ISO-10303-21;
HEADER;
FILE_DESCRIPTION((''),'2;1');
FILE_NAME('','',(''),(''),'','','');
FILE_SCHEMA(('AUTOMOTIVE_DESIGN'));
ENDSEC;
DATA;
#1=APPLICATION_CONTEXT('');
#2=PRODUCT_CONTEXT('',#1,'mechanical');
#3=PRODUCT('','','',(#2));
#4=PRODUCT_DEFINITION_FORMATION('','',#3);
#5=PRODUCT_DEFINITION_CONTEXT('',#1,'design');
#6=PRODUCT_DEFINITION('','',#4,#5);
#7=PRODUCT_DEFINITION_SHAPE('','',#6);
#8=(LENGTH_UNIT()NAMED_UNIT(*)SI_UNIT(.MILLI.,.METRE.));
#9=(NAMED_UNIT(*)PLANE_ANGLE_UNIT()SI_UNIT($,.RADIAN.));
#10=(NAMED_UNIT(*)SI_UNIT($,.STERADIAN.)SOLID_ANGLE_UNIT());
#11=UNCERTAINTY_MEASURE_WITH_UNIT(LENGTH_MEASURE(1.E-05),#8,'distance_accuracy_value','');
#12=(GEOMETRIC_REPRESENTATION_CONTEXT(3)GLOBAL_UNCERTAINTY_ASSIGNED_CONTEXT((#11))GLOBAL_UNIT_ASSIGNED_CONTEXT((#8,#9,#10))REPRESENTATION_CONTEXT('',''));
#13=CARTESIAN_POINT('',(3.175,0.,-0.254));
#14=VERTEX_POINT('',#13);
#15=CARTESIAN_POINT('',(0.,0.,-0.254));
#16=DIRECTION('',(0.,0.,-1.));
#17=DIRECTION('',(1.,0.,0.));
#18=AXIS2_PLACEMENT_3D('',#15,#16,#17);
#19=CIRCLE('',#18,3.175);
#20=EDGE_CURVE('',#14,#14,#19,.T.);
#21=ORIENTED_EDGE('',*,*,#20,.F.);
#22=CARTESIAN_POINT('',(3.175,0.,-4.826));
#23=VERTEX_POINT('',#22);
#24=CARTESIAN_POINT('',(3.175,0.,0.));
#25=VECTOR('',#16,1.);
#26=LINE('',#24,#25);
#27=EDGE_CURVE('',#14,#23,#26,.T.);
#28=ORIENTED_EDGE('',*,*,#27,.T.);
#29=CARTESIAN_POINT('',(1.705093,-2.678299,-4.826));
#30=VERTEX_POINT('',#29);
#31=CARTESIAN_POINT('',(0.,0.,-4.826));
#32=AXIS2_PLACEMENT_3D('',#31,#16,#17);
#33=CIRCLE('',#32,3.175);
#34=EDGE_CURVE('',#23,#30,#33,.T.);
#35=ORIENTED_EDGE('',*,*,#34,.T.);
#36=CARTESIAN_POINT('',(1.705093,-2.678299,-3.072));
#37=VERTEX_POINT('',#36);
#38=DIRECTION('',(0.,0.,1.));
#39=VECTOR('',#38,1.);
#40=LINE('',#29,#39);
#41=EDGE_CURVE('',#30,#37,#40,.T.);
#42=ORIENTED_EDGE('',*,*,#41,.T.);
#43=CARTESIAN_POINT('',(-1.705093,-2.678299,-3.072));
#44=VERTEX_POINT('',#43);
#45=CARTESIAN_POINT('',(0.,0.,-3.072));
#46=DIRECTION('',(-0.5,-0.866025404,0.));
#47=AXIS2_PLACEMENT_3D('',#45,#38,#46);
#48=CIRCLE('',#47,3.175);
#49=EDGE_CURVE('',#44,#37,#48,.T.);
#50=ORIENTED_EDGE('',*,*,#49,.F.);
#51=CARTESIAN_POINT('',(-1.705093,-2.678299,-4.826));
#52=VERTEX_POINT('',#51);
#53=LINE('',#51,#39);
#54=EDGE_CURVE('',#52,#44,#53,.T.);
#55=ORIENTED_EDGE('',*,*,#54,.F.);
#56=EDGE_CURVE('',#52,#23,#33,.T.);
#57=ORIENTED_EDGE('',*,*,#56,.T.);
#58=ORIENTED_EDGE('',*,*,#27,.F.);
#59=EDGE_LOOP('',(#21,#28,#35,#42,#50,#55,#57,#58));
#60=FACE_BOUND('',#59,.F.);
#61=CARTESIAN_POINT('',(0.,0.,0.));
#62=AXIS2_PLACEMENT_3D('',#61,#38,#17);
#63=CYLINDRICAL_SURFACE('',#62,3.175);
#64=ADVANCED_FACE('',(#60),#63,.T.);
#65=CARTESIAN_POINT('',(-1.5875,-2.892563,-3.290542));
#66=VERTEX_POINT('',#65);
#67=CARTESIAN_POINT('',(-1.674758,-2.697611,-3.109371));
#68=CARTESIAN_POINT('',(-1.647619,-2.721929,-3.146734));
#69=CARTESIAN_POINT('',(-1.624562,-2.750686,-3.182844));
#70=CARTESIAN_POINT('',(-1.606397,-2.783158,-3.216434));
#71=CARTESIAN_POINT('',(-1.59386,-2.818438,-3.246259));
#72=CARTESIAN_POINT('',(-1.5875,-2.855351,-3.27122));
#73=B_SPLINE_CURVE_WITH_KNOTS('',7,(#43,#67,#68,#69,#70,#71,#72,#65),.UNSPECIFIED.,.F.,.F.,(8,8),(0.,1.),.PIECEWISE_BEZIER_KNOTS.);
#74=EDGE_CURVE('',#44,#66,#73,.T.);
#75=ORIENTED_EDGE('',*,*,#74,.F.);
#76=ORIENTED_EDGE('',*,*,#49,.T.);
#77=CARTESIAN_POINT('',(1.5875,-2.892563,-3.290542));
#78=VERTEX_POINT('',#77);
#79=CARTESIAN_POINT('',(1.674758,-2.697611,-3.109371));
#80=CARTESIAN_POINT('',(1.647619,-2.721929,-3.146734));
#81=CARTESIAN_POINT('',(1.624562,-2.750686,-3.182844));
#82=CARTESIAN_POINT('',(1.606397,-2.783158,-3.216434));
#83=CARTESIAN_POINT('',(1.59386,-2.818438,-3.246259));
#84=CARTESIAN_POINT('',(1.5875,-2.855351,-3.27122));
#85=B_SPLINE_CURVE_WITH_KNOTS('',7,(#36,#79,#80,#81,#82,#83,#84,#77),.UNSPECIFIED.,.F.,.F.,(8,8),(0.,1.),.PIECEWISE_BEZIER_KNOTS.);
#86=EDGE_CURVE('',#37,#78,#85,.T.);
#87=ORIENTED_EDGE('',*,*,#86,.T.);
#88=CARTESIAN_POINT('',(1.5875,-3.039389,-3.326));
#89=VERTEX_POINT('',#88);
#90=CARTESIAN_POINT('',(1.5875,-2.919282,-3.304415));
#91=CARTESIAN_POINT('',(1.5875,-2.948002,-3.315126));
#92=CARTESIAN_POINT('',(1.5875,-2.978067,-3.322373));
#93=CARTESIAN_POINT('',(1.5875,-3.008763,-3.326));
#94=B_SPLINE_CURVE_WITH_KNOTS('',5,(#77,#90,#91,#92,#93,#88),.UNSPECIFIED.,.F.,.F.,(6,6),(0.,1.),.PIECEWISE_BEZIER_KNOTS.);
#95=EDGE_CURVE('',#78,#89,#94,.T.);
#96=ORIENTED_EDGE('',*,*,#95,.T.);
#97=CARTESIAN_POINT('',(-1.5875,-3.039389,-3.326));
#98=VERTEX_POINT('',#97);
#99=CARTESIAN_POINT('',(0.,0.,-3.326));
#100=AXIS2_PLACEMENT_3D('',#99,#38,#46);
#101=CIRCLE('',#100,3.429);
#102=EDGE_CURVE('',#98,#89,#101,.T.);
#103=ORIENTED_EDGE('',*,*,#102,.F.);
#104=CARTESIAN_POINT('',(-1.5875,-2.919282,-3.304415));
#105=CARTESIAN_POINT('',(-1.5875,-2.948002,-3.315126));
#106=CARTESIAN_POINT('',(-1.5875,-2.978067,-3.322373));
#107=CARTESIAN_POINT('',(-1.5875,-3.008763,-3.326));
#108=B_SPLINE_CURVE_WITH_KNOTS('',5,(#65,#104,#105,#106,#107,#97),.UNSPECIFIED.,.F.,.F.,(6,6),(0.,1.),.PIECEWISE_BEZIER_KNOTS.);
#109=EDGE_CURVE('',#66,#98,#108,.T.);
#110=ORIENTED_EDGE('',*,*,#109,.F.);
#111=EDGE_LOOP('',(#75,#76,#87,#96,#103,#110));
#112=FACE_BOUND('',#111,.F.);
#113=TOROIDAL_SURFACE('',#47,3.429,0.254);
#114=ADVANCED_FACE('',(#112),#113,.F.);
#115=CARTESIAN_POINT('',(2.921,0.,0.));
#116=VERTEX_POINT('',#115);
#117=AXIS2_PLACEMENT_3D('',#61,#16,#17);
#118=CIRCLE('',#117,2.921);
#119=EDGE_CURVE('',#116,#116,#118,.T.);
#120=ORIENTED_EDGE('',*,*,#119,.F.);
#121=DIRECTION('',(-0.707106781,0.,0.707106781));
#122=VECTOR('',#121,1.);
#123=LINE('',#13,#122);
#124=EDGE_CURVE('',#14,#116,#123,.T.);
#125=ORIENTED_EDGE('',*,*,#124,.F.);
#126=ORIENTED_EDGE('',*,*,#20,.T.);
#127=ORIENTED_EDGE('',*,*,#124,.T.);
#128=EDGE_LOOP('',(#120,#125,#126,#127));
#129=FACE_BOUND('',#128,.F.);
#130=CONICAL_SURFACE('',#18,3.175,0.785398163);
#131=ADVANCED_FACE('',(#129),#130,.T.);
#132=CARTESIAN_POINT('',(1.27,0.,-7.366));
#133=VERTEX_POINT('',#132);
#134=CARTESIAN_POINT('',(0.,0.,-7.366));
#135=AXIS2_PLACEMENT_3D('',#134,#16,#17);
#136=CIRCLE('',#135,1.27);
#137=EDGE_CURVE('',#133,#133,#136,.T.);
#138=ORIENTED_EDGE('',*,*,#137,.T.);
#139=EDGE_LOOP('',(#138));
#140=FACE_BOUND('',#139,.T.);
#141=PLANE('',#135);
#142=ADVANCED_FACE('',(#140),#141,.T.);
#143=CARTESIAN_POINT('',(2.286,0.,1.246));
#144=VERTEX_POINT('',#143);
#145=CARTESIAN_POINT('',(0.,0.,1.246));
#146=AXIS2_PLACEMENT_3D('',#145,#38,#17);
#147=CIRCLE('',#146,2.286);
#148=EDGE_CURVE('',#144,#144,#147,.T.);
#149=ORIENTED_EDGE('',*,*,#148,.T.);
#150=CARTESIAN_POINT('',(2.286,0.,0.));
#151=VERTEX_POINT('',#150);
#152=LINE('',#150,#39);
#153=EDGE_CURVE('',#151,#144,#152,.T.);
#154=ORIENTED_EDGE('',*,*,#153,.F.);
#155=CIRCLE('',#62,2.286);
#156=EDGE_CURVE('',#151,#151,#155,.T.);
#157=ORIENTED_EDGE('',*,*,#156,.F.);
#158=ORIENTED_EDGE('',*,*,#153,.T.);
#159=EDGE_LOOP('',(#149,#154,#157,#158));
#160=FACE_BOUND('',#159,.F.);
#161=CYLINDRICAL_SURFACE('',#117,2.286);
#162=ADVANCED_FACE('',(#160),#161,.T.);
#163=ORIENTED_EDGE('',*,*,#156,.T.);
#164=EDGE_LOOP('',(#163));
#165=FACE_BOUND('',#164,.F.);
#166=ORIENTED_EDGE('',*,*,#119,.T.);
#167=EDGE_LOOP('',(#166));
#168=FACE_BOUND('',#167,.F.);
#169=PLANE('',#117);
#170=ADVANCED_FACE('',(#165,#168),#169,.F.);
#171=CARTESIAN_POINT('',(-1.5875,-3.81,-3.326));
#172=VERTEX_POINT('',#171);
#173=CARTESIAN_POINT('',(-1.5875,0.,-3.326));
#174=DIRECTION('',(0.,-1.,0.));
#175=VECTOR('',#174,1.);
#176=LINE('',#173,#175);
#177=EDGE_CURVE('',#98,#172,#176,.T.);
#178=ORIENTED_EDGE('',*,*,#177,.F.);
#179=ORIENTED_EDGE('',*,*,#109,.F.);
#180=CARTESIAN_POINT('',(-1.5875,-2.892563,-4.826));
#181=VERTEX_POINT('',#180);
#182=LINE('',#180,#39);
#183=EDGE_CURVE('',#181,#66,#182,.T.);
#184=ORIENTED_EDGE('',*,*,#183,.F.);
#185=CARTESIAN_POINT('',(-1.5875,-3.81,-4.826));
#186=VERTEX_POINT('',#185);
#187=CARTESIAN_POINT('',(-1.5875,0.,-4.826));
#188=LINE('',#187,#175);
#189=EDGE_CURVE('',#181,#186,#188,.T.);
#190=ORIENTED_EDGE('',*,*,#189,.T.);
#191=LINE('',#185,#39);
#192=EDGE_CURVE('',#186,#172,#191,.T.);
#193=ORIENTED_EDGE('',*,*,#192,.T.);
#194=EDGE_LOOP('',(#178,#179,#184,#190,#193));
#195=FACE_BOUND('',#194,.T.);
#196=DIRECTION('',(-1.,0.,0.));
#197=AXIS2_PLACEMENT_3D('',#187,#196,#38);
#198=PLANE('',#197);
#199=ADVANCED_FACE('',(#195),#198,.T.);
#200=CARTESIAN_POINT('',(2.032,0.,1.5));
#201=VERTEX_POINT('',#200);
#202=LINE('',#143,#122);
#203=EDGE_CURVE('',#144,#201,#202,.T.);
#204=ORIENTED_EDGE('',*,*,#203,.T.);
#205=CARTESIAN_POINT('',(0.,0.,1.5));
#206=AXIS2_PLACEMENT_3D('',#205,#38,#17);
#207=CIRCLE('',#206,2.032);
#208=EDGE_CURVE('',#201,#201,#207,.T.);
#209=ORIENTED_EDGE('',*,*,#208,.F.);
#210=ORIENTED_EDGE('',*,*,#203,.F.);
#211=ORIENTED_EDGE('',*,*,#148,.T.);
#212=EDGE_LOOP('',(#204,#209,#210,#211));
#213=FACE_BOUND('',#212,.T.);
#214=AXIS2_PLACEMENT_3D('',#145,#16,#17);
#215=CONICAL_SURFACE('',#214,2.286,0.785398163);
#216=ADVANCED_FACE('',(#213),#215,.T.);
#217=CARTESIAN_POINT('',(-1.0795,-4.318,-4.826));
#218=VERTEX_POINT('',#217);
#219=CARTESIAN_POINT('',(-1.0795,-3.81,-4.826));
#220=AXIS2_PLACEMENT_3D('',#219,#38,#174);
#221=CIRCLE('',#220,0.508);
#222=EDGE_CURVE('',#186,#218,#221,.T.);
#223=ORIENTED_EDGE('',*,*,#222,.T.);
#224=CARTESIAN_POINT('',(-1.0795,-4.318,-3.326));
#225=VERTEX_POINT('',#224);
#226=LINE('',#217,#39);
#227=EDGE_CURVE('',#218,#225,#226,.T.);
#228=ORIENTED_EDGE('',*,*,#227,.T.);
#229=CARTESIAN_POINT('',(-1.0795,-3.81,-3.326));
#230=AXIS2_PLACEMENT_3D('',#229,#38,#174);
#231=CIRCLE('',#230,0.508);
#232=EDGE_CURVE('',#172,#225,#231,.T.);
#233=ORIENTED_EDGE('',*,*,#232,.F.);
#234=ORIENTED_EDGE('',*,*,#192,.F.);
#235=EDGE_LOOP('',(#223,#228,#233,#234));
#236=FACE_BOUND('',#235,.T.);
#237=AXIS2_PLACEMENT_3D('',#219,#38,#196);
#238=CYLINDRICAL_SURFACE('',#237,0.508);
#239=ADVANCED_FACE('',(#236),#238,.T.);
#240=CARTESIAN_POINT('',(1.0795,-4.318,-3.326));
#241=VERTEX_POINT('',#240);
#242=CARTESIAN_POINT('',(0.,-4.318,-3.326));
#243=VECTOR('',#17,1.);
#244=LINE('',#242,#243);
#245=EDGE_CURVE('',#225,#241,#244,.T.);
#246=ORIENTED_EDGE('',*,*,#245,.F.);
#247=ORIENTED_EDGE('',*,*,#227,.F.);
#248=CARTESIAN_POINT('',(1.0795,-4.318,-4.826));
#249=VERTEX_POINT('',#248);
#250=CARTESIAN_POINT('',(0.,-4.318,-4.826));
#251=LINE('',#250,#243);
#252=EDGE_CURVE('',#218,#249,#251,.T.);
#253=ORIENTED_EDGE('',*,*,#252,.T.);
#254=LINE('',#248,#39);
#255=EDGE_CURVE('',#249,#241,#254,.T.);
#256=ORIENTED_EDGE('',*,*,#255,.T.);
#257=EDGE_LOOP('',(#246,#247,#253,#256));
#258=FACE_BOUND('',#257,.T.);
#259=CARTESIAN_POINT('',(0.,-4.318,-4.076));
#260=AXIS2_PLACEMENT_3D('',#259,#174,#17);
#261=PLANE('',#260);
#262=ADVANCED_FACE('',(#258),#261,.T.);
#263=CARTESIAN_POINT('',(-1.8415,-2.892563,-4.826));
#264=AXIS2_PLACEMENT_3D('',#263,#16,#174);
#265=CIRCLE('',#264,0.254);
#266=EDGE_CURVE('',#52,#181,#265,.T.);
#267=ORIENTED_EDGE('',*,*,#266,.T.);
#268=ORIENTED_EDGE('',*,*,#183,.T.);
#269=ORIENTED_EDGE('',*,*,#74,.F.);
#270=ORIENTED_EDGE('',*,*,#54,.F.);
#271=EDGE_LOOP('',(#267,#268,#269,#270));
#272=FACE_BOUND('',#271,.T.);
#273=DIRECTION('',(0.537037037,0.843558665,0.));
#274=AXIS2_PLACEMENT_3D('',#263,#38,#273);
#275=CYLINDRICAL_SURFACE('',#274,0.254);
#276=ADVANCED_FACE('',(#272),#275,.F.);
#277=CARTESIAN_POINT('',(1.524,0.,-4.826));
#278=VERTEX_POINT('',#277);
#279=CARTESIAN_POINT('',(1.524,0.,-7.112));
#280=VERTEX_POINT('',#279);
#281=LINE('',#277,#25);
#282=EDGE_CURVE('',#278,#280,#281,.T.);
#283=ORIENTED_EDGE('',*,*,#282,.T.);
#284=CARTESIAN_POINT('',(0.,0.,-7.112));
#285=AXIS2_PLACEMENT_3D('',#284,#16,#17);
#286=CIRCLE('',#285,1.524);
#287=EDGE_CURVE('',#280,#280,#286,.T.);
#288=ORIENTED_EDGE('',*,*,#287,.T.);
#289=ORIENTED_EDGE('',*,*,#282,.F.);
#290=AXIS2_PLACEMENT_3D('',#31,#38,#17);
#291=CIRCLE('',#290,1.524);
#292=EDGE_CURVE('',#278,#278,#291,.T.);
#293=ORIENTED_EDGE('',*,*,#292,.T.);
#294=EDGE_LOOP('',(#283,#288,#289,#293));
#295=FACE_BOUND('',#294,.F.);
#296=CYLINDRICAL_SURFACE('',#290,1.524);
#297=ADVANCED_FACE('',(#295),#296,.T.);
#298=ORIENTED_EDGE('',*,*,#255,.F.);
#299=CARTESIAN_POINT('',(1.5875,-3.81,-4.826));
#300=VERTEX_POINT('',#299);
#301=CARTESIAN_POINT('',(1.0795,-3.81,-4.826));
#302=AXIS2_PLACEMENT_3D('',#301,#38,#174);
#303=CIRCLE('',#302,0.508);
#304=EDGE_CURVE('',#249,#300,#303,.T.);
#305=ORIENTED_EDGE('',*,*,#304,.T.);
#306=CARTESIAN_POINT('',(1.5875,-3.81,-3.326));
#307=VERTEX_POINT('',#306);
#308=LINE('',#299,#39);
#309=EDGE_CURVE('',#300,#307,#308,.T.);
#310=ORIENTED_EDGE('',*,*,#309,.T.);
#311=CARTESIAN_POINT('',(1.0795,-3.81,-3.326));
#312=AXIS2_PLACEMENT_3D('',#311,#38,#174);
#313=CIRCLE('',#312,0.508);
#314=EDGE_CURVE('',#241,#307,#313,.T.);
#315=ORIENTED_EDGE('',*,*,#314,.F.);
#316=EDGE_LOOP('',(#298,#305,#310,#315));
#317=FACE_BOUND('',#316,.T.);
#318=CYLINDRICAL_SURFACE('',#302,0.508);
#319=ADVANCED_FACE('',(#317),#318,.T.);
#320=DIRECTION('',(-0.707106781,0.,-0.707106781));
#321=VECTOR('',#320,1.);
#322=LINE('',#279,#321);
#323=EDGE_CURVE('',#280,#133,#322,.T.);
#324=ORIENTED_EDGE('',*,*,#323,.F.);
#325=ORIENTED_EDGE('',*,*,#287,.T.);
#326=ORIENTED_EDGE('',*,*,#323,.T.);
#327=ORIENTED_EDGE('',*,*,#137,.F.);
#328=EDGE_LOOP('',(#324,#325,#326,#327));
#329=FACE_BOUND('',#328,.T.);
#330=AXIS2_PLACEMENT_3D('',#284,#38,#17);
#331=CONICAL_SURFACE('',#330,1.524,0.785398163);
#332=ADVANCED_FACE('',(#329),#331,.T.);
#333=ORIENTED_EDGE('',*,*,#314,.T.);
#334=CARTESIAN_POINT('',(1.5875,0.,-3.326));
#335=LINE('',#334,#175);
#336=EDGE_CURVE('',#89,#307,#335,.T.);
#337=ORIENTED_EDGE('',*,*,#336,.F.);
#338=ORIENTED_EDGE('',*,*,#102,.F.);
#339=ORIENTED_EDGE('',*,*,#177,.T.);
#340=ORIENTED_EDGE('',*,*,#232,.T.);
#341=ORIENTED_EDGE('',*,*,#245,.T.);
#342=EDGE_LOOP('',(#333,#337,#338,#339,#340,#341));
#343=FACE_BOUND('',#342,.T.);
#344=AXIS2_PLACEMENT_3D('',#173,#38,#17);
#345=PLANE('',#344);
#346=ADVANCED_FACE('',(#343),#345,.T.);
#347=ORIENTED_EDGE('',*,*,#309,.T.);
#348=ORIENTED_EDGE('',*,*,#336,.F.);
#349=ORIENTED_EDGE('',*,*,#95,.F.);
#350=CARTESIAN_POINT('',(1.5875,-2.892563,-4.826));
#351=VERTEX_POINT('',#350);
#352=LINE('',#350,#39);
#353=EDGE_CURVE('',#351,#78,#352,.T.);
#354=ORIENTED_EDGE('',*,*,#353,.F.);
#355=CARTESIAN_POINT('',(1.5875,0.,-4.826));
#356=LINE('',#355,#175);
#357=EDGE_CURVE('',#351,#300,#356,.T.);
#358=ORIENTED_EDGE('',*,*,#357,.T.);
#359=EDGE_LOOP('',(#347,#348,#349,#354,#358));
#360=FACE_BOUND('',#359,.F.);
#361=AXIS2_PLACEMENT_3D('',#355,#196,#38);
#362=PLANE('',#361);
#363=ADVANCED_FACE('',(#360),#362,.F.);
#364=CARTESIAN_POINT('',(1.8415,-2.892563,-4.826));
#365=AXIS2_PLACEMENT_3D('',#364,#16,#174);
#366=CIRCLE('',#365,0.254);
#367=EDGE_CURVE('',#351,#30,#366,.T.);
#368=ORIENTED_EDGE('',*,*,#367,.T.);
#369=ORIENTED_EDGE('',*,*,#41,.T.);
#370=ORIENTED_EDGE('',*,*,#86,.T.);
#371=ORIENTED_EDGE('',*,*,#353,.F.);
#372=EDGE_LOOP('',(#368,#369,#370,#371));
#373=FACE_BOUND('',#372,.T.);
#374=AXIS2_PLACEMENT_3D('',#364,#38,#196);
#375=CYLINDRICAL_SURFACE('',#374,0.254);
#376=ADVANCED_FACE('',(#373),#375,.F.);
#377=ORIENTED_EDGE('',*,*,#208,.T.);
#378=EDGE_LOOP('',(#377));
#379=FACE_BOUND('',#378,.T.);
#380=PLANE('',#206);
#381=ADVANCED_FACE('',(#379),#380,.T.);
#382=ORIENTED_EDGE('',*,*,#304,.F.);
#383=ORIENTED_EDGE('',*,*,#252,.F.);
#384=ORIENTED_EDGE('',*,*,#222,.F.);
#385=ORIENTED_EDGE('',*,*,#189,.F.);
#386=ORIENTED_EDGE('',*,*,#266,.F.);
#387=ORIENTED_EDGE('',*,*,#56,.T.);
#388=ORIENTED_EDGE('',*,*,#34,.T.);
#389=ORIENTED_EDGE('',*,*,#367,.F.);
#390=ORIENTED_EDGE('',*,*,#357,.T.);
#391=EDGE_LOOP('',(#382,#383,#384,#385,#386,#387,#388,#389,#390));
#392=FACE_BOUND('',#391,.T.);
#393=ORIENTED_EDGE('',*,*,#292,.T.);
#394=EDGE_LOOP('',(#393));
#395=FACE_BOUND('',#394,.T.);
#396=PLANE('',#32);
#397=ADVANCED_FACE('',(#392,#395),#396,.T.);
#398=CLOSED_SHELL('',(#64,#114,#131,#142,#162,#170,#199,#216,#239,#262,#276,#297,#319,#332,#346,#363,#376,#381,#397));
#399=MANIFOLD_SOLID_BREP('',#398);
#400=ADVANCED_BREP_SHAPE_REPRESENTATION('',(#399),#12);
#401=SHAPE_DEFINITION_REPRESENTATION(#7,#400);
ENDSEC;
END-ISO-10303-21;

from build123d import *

# Parameters (mm, degrees)
F0_R     = 2.286
F1_DEPTH = 1.5
F2_R     = 3.175
F2_R_2   = 2.286
F3_DEPTH = 4.826
F4_SIZE  = 0.254
F5_R     = 1.524
F6_DEPTH = 2.54
F7_W     = 3.175
F7_H     = 1.5
F8_DEPTH = 4.318
F9_R     = 0.508
F10_SIZE = 0.254
F11_R    = 0.254
F12_SIZE = 0.254


# Not quite as in the source:
# - a feature names something its author has since deleted; it is built from what else it names


with BuildPart() as f1:
    # F0 (on Top) → F1 (new body)
    with BuildSketch(Plane.XY):
        Circle(F0_R)
    extrude(amount=F1_DEPTH)

    # F2 (on face) → F3 (join)
    with BuildSketch(Plane(origin=(0, 0, 0), x_dir=(1, 0, 0), z_dir=(0, 0, -1))):
        Circle(F2_R)
        Circle(F2_R_2, mode=Mode.SUBTRACT)
        Circle(F2_R_2)
    extrude(amount=F3_DEPTH)

    # F4
    f4_edges = [f1.edges().sort_by_distance(p)[0] for p in [
        (-2.286, 0, 1.5),
    ]]
    chamfer(f4_edges, length=F4_SIZE)

    # F5 (on face) → F6 (join)
    with BuildSketch(Plane(origin=(0, 0, -4.826), x_dir=(1, 0, 0), z_dir=(0, 0, -1))):
        Circle(F5_R)
    extrude(amount=F6_DEPTH)

    # F7 (on Front) → F8 (join)
    with BuildSketch(Plane.XZ):
        with Locations((0, -4.076)):
            Rectangle(F7_W, F7_H)
    extrude(amount=F8_DEPTH)

    # F9
    f9_edges = [f1.edges().sort_by_distance(p)[0] for p in [
        (-1.5875, -4.318, -4.076),
        (1.5875, -4.318, -4.076),
    ]]
    fillet(f9_edges, radius=F9_R)

    # F10
    f10_edges = [f1.edges().sort_by_distance(p)[0] for p in [
        (-1.524, 0, -7.366),
    ]]
    chamfer(f10_edges, length=F10_SIZE)

    # F11
    f11_edges = [f1.edges().sort_by_distance(p)[0] for p in [
        (0, -3.175, -3.326),
        (1.5875, -2.749631, -4.076),
        (-1.5875, -2.749631, -4.076),
    ]]
    fillet(f11_edges, radius=F11_R)

    # F12
    f12_edges = [f1.edges().sort_by_distance(p)[0] for p in [
        (-3.175, 0, 0),
    ]]
    chamfer(f12_edges, length=F12_SIZE)


solid = f1.part
